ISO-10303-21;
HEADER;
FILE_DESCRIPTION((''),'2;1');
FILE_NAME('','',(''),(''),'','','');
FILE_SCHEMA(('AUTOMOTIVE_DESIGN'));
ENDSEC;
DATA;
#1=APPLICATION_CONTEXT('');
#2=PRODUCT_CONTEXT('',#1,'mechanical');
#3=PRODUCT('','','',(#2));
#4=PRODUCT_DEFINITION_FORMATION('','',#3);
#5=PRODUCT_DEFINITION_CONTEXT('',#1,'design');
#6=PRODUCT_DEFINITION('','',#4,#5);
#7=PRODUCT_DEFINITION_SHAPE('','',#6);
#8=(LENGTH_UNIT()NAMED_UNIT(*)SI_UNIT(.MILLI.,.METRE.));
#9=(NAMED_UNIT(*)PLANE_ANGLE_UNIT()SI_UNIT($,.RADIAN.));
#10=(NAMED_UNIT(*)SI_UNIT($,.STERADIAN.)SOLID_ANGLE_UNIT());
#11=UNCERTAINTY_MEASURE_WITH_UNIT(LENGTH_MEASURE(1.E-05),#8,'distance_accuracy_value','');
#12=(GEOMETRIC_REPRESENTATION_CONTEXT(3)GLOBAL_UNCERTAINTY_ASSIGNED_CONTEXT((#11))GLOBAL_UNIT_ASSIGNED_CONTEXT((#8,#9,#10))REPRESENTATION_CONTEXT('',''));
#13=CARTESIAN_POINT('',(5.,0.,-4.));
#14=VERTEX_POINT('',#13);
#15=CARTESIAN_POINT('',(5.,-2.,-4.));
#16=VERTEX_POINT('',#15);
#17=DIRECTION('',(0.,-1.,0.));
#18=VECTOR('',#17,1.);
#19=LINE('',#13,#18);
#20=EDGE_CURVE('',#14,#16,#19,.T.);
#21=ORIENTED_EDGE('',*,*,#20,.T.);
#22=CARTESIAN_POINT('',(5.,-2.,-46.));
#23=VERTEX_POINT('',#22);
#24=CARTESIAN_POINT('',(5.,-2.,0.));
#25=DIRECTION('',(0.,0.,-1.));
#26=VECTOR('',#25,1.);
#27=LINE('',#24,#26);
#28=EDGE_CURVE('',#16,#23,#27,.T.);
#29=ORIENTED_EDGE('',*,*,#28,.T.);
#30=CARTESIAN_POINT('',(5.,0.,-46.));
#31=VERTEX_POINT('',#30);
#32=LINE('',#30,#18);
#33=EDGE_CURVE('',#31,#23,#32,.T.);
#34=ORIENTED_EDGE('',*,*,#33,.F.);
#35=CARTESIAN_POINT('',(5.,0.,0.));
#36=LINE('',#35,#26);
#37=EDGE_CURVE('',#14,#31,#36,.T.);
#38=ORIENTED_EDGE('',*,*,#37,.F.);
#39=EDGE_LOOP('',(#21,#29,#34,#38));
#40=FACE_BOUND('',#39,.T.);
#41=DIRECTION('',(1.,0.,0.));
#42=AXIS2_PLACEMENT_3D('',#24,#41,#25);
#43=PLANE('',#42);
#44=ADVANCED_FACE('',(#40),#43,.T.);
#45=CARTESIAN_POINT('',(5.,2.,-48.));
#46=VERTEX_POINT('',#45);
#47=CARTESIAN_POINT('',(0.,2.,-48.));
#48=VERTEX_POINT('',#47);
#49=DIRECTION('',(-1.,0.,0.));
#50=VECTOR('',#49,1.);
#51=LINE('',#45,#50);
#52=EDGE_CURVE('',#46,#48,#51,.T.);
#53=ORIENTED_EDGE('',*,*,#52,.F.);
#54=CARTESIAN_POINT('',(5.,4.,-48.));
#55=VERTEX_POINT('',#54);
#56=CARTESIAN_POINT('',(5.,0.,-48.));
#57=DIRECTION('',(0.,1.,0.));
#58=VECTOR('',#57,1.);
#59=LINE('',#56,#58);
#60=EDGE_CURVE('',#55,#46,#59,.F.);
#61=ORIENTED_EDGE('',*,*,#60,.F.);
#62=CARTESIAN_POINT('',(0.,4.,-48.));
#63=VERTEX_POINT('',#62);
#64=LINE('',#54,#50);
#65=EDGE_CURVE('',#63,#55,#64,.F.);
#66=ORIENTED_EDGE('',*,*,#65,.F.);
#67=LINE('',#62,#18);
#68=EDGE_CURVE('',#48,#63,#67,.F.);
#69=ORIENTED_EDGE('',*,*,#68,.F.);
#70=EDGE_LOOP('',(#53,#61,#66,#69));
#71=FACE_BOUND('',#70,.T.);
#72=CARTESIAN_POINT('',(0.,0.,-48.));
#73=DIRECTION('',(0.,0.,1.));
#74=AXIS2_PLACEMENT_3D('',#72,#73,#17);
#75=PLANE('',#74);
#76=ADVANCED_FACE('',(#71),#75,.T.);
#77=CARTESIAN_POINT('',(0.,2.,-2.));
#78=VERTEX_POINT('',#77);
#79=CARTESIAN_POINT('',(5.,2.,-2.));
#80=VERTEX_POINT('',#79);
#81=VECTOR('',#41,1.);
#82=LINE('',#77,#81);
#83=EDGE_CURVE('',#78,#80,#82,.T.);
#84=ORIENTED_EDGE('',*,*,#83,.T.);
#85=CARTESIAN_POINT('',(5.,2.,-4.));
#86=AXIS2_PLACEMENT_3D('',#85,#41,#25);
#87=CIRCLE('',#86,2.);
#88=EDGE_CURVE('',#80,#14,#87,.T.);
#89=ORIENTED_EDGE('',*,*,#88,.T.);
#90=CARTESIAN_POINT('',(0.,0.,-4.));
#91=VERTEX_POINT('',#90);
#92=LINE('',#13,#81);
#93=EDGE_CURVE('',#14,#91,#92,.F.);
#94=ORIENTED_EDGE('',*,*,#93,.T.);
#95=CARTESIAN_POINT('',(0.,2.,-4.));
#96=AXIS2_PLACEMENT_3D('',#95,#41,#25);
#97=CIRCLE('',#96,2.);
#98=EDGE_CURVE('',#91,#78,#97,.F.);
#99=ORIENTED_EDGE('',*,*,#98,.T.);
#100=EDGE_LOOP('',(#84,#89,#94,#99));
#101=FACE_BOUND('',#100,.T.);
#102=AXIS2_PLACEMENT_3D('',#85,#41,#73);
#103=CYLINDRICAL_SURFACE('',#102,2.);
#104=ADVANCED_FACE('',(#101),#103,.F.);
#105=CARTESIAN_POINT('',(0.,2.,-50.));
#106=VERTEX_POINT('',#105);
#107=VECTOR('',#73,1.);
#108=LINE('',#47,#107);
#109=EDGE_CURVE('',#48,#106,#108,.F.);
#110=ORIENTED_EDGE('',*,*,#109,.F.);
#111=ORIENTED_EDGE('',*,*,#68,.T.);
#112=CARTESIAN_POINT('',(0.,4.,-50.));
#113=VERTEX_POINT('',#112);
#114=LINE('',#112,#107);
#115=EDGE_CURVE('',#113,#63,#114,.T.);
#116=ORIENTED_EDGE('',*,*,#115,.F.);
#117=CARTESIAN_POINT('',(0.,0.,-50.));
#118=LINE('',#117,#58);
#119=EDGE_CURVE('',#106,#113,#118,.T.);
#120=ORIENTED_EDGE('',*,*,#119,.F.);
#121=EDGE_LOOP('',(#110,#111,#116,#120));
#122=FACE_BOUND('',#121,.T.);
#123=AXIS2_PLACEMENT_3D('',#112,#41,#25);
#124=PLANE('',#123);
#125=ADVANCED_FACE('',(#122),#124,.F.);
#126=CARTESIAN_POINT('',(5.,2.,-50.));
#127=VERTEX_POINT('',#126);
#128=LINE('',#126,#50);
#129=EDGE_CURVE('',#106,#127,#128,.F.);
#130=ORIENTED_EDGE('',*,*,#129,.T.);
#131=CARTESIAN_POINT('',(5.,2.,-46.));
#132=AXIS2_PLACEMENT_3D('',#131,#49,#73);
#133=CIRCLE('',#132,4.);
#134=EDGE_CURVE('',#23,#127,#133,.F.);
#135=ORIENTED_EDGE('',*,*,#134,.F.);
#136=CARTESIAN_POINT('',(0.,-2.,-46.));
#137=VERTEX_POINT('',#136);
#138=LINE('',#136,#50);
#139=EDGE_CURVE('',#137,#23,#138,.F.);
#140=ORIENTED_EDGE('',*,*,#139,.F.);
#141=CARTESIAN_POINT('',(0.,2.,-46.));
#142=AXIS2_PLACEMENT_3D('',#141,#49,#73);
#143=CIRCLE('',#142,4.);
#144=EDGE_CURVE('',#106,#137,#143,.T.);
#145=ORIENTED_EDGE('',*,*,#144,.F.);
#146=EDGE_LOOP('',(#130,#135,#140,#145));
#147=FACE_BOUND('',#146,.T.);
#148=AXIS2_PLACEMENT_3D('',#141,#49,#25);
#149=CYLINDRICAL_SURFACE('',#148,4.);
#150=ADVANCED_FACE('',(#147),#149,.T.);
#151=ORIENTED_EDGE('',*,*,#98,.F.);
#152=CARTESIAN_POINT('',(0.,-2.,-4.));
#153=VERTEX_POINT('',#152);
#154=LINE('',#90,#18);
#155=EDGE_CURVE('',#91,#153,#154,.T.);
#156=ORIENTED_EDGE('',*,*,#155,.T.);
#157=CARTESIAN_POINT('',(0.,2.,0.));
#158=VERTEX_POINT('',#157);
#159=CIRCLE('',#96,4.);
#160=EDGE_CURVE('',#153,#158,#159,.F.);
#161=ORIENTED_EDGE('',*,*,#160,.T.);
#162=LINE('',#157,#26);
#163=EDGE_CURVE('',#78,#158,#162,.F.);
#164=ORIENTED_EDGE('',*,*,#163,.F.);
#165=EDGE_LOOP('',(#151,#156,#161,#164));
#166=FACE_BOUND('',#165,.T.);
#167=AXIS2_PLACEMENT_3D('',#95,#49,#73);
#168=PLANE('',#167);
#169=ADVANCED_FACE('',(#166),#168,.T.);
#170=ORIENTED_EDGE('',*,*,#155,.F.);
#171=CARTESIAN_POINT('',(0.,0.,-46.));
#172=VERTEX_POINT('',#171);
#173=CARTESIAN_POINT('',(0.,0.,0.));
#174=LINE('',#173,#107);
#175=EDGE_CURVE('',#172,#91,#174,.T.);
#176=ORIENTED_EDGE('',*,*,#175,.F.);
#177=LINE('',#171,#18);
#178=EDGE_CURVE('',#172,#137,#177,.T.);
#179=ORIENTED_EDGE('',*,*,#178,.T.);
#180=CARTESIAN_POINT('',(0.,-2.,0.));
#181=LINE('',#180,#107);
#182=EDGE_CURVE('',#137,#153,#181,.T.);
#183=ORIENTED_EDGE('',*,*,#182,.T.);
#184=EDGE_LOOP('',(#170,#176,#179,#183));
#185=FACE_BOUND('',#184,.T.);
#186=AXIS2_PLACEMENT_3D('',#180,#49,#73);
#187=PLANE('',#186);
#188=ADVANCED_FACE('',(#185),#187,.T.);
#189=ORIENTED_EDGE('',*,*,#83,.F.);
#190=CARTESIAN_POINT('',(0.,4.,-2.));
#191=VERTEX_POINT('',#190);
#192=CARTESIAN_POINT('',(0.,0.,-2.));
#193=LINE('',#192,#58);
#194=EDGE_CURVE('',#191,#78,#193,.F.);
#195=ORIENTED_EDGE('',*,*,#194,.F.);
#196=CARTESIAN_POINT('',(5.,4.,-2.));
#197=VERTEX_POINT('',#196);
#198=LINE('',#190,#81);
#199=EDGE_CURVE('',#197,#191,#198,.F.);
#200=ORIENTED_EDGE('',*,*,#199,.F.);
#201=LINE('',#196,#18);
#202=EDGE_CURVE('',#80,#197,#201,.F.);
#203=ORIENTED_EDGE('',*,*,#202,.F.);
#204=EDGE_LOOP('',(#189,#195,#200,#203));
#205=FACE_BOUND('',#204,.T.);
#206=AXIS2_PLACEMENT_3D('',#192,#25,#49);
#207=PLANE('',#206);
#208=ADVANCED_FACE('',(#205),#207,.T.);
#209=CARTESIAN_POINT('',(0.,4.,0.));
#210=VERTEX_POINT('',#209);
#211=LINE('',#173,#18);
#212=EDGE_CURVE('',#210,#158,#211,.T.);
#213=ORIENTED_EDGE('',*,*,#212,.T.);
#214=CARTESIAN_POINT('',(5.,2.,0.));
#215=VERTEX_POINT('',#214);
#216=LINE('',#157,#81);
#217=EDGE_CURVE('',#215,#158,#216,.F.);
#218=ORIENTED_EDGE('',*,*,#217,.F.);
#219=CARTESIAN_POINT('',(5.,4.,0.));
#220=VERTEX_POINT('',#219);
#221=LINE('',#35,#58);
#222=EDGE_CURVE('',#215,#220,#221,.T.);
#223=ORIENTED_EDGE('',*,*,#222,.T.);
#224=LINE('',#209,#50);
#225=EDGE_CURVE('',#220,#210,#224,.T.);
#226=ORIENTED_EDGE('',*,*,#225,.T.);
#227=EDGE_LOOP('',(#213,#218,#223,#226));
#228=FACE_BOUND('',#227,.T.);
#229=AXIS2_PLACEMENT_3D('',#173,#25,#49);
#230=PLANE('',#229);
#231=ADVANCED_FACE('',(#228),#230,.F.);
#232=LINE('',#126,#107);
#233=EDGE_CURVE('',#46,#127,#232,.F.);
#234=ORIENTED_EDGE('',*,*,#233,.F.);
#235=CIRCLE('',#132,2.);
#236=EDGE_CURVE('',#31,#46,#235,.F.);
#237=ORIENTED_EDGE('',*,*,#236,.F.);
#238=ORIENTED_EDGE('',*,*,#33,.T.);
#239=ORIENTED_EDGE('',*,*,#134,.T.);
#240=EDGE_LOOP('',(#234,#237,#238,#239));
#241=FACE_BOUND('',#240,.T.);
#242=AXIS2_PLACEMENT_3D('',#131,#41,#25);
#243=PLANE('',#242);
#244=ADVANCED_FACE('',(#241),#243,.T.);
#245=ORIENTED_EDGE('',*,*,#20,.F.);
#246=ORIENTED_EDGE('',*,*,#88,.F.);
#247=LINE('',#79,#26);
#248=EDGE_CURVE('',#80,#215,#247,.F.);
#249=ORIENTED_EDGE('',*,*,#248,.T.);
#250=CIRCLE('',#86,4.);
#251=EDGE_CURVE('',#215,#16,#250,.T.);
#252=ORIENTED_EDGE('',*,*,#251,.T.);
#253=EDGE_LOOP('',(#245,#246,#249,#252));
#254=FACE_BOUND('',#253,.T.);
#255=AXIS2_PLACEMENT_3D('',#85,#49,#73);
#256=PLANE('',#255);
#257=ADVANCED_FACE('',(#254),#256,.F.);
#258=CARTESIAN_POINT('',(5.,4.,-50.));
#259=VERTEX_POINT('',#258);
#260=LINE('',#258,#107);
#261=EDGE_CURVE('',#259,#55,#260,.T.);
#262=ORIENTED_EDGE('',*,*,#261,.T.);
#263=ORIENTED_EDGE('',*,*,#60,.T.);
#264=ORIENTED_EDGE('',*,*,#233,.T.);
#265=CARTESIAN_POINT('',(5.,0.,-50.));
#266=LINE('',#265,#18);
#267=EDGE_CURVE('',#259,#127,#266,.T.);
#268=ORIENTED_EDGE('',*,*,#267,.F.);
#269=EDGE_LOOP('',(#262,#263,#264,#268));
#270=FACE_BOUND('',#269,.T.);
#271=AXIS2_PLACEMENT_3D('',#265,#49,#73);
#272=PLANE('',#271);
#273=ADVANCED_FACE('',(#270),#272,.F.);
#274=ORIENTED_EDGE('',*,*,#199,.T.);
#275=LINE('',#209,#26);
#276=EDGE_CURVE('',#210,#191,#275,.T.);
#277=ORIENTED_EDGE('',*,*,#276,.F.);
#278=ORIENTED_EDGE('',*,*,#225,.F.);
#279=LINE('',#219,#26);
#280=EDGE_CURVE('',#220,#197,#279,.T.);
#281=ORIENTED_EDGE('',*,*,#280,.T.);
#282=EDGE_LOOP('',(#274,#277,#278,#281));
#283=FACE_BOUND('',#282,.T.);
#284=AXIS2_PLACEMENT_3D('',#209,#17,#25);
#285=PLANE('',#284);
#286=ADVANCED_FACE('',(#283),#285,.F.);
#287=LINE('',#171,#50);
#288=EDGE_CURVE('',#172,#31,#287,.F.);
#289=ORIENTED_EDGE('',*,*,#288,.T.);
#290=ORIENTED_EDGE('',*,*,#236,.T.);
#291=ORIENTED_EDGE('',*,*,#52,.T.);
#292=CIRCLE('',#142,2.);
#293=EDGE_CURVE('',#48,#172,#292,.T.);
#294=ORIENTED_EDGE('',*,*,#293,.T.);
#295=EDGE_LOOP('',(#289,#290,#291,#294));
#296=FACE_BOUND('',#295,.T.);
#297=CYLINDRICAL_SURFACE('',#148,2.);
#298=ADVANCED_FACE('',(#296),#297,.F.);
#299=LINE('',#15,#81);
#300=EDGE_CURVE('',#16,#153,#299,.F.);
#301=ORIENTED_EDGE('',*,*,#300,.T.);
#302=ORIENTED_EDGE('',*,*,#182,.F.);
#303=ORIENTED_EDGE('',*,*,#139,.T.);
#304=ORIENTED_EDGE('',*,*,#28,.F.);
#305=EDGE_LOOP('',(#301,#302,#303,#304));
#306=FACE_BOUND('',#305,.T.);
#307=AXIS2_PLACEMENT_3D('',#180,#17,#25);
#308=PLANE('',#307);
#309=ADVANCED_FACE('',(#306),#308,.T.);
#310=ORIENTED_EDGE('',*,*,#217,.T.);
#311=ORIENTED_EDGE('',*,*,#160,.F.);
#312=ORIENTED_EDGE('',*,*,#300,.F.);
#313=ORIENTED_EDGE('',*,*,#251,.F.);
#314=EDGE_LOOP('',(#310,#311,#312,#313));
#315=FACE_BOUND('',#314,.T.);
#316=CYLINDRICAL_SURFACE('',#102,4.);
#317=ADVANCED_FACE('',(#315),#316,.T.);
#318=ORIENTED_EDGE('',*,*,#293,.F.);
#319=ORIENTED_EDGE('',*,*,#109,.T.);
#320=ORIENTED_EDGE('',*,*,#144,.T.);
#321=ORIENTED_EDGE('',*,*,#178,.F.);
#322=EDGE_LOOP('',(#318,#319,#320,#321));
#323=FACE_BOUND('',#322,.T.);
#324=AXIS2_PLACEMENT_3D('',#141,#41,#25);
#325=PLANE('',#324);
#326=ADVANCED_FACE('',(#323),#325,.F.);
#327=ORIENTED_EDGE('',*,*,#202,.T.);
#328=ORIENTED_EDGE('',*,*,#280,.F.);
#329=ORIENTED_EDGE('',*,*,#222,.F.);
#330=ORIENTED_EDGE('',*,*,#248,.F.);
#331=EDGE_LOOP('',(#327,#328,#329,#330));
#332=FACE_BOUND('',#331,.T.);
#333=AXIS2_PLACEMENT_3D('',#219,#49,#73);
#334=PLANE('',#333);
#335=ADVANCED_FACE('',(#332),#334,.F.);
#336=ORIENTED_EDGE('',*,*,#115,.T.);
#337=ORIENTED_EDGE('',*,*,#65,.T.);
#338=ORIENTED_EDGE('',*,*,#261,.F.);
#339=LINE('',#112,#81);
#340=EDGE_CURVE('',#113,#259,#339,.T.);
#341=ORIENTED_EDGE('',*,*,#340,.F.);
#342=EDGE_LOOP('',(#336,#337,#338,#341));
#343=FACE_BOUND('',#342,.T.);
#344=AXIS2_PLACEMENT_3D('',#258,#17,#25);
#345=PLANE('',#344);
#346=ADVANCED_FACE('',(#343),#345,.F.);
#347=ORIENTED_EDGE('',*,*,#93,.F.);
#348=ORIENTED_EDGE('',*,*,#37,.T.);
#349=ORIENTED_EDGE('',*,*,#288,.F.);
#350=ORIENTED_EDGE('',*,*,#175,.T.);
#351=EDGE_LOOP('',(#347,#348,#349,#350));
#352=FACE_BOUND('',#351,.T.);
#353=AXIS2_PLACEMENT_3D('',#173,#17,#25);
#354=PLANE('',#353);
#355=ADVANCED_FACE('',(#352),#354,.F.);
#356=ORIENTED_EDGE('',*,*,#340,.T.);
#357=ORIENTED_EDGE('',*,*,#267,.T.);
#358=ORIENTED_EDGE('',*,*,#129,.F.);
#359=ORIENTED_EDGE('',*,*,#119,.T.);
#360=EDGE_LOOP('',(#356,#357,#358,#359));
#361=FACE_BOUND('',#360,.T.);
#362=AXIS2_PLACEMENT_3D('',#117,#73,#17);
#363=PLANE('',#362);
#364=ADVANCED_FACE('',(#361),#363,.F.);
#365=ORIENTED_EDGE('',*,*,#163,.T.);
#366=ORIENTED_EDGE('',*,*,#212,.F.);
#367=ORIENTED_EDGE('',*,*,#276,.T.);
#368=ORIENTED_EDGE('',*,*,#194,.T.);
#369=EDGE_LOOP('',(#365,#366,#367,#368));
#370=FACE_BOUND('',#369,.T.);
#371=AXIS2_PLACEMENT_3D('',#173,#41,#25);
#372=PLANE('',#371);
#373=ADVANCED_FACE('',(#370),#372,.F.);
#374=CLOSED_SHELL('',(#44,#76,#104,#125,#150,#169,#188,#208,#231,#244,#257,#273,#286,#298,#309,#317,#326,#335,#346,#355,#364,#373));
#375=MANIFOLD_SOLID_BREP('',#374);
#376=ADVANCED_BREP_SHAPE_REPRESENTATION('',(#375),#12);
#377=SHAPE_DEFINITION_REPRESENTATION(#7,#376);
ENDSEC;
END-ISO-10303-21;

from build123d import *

# Parameters (mm, degrees)
ESQUISSE2_W                             = 5
ESQUISSE2_H                             = 50
T_LE_DE_BASE_PLI_E1_DEPTH               = 2
T_LE_PLI_E_SUR_AR_TE1_STRIP_W           = 12
T_LE_PLI_E_SUR_AR_TE1_STRIP_H           = 2
T_LE_PLI_E_SUR_AR_TE1_STRIP_CUT_DEPTH   = 5
T_LE_PLI_E_SUR_AR_TE1_STRIP_2_W         = 12
T_LE_PLI_E_SUR_AR_TE1_STRIP_2_H         = 2
T_LE_PLI_E_SUR_AR_TE1_STRIP_CUT_2_DEPTH = 5
T_LE_PLI_E_SUR_AR_TE1_DEPTH             = 5
T_LE_PLI_E_SUR_AR_TE1_BEND_DEPTH        = 5


# Sheet-metal steps are written as plain solids
with BuildPart() as part:
    # Esquisse2 → Tôle de base pliée1 (new body)
    with BuildSketch(Plane(origin=(0, 0, 0), x_dir=(1, 0, 0), z_dir=(0, 1, 0))):
        with Locations((2.5, 25)):
            Rectangle(ESQUISSE2_W, ESQUISSE2_H)
    extrude(amount=-T_LE_DE_BASE_PLI_E1_DEPTH)

    # Tôle pliée sur arête1 strip (across the edge) → Tôle pliée sur arête1 strip cut (cut)
    with BuildSketch(Plane(origin=(0, 0, 0), x_dir=(0, 0, -1), z_dir=(1, 0, 0))):
        with Locations((-2, -1)):
            Rectangle(T_LE_PLI_E_SUR_AR_TE1_STRIP_W, T_LE_PLI_E_SUR_AR_TE1_STRIP_H)
    extrude(amount=T_LE_PLI_E_SUR_AR_TE1_STRIP_CUT_DEPTH, mode=Mode.SUBTRACT)

    # Tôle pliée sur arête1 strip 2 (across the edge) → Tôle pliée sur arête1 strip cut 2 (cut)
    with BuildSketch(Plane(origin=(5, 0, -50), x_dir=(0, 0, 1), z_dir=(-1, 0, 0))):
        with Locations((-2, -1)):
            Rectangle(T_LE_PLI_E_SUR_AR_TE1_STRIP_2_W, T_LE_PLI_E_SUR_AR_TE1_STRIP_2_H)
    extrude(amount=T_LE_PLI_E_SUR_AR_TE1_STRIP_CUT_2_DEPTH, mode=Mode.SUBTRACT)

    # Tôle pliée sur arête1 section (across the edge) → Tôle pliée sur arête1 (add)
    with BuildSketch(Plane(origin=(0, 0, 0), x_dir=(0, 0, -1), z_dir=(1, 0, 0))):
        with BuildLine():
            Line((0, 2), (0, 4))
            Line((0, 4), (2, 4))
            Line((2, 4), (2, 2))
            ThreePointArc((2, 2), (2.585786438, 0.585786438), (4, 0))
            Line((4, 0), (4, -2))
            ThreePointArc((4, -2), (1.171572875, -0.828427125), (0, 2))
        make_face()
    extrude(amount=T_LE_PLI_E_SUR_AR_TE1_DEPTH)

    # Tôle pliée sur arête1 section 2 (across the edge) → Tôle pliée sur arête1 bend (add)
    with BuildSketch(Plane(origin=(5, 0, -50), x_dir=(0, 0, 1), z_dir=(-1, 0, 0))):
        with BuildLine():
            Line((0, 2), (0, 4))
            Line((0, 4), (2, 4))
            Line((2, 4), (2, 2))
            ThreePointArc((2, 2), (2.585786438, 0.585786438), (4, 0))
            Line((4, 0), (4, -2))
            ThreePointArc((4, -2), (1.171572875, -0.828427125), (0, 2))
        make_face()
    extrude(amount=T_LE_PLI_E_SUR_AR_TE1_BEND_DEPTH)


solid = part.part
